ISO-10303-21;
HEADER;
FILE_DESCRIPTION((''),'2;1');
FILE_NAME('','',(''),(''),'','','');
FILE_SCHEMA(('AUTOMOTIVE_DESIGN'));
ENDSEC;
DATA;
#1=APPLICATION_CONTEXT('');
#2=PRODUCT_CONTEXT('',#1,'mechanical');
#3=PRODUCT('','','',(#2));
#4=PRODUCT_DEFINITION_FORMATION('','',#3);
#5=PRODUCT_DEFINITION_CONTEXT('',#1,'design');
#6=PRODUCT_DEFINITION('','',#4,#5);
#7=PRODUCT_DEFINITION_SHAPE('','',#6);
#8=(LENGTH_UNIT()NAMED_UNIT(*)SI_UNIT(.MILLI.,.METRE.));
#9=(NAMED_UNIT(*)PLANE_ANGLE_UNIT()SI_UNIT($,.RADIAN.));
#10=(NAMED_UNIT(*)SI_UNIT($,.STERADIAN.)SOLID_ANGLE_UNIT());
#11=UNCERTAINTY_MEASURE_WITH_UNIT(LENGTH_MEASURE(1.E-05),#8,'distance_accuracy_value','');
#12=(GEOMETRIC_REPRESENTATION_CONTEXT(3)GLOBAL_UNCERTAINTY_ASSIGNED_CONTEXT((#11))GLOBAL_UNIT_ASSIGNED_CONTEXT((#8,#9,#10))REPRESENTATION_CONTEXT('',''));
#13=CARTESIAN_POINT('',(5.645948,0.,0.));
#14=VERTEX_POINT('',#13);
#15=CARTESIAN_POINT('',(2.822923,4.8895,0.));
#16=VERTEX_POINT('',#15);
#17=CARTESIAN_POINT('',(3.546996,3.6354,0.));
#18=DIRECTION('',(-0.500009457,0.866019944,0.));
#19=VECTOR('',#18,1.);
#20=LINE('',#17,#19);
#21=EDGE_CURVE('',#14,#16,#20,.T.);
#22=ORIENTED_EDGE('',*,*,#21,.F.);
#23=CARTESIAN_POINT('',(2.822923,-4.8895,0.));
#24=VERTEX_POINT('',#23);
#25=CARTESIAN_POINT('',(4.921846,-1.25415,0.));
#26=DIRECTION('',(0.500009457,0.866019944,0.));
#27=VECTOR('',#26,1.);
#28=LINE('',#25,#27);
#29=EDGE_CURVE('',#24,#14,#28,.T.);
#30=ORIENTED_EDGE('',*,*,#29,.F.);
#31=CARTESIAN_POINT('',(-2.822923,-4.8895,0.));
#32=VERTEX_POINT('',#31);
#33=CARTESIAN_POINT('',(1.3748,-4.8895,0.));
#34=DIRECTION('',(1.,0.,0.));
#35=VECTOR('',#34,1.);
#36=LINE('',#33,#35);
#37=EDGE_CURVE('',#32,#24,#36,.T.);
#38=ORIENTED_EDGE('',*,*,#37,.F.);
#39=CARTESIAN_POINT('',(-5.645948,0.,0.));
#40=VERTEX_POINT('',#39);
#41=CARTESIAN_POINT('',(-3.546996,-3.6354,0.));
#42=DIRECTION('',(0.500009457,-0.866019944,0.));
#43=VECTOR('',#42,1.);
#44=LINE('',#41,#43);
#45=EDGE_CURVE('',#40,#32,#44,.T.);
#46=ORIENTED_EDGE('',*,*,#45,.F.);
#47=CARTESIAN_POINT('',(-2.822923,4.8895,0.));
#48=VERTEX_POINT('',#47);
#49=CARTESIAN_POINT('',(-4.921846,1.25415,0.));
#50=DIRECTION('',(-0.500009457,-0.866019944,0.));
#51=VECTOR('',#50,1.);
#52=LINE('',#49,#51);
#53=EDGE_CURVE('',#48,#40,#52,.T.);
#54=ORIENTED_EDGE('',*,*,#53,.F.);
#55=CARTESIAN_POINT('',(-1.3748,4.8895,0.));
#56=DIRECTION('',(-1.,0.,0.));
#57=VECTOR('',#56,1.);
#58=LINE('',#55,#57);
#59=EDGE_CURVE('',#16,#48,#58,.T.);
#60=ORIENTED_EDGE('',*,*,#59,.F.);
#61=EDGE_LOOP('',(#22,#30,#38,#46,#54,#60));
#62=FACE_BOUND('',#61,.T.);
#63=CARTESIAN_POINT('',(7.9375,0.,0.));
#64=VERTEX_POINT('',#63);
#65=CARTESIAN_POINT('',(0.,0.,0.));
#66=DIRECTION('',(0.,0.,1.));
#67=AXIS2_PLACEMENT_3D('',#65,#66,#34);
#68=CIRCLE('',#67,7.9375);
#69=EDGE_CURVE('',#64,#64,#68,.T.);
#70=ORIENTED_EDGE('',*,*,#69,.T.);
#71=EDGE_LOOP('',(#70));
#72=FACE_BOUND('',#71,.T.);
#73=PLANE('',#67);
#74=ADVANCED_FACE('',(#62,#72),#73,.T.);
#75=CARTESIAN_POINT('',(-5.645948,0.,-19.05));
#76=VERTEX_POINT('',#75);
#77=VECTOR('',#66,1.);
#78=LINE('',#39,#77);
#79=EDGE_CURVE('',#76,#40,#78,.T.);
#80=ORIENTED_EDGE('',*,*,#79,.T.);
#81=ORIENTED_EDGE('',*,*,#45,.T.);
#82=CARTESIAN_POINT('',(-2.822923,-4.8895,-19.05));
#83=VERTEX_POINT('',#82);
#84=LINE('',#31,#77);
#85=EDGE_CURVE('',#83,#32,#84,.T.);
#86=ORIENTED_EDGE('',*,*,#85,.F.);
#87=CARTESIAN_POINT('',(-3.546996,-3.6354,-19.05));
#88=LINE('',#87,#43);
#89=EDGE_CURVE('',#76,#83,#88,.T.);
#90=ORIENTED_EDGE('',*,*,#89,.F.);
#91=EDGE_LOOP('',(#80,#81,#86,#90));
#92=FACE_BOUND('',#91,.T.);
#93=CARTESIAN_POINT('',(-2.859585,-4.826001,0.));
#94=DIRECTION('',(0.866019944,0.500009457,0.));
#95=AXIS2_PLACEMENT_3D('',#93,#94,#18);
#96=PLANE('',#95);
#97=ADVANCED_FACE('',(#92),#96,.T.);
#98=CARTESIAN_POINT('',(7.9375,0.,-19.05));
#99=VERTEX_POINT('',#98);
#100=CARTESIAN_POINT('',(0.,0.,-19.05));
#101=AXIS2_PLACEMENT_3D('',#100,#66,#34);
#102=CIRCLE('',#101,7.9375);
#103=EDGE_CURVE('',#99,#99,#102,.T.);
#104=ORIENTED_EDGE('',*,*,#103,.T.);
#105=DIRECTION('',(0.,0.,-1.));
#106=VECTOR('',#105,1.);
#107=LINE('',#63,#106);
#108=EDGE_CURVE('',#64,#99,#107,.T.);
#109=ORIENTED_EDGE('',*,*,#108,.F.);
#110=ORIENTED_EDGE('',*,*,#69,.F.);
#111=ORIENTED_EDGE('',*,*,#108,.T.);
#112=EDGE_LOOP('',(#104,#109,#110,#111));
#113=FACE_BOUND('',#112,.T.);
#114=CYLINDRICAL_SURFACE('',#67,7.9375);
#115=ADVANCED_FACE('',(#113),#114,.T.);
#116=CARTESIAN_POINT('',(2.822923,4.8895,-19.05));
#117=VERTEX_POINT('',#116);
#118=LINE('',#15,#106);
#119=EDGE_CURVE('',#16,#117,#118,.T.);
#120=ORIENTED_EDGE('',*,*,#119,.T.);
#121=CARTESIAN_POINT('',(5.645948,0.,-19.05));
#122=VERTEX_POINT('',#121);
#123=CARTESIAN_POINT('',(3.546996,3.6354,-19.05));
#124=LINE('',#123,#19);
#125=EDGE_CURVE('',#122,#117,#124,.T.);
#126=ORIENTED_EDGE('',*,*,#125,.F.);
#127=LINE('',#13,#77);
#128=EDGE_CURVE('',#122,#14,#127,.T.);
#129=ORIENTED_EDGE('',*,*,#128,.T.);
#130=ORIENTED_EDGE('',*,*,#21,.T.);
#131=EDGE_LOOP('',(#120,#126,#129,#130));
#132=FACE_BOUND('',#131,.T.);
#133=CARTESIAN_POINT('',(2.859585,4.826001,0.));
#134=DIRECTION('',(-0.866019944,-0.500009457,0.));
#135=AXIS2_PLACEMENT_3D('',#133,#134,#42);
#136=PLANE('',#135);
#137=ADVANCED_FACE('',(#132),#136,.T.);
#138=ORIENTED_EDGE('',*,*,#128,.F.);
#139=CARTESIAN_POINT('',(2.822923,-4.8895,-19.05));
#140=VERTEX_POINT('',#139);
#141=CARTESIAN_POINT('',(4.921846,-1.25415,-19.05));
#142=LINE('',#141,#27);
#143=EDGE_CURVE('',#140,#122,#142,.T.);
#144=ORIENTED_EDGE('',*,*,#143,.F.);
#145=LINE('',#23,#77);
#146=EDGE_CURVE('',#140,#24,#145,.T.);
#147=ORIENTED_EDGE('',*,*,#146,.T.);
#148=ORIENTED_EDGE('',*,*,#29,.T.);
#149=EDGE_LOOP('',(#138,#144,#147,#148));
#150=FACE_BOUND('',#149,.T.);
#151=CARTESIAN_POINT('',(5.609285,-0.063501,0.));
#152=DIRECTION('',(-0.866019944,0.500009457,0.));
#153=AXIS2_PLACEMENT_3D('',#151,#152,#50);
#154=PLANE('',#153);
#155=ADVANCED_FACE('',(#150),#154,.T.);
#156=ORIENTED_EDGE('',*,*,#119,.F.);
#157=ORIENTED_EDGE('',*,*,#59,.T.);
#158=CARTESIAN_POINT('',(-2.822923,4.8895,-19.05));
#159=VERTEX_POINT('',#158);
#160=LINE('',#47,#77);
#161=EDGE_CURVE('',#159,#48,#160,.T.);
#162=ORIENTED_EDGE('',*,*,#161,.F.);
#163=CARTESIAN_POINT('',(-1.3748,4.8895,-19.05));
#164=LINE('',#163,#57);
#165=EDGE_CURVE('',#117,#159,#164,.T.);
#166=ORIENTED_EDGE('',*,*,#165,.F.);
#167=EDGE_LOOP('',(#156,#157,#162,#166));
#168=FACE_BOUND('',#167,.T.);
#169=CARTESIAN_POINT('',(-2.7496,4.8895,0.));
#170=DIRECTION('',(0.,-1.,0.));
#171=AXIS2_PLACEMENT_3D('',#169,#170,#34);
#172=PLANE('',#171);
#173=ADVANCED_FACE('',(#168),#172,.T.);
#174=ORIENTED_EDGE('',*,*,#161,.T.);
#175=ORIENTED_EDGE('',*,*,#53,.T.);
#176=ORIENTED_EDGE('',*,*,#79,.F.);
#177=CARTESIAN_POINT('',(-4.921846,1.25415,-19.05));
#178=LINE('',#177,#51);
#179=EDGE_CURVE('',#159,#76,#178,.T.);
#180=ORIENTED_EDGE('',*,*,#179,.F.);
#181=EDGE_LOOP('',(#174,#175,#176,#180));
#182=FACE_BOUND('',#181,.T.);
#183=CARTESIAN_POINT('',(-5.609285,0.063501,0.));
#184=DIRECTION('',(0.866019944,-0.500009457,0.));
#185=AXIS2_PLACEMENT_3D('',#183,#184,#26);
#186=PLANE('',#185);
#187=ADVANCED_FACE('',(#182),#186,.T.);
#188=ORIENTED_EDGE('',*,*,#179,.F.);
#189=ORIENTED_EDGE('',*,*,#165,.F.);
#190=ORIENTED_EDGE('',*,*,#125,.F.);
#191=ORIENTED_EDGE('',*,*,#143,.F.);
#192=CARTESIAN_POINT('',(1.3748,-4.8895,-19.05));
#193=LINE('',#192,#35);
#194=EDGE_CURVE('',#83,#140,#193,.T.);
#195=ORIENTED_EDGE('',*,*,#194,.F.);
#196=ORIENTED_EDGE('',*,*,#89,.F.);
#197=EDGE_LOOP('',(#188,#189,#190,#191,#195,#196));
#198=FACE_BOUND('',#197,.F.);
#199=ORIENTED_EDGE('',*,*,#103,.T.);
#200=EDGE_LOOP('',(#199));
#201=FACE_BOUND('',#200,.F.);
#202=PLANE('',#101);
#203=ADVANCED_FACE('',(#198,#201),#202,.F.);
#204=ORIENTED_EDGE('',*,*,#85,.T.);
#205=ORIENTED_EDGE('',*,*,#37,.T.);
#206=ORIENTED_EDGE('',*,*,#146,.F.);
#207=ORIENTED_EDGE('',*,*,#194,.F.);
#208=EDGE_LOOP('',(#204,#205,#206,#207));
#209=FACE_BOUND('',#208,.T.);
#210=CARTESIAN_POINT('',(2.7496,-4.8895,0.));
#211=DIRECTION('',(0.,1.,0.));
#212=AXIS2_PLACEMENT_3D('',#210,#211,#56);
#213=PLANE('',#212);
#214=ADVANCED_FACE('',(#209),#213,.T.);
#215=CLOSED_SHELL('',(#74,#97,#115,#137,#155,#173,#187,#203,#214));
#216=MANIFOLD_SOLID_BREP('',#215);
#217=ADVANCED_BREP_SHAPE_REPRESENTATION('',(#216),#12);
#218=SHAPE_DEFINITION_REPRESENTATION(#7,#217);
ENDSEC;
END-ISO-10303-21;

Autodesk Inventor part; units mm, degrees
ref_plane "YZ Plane" through (0, 0, 0) normal (1, 0, 0) x (0, 1, 0)
ref_plane "XZ Plane" through (0, 0, 0) normal (0, 1, 0) x (-1, 0, 0)
ref_plane "XY Plane" through (0, 0, 0) normal (0, 0, 1) x (1, 0, 0)
sketch "Sketch1" plane through (0, 0, 0) normal (0, 0, 1) x (1, 0, 0)
  line L0 (2.7496, 4.7625) -> (5.4993, 0)
  line L1 (5.4993, 0) -> (2.7496, -4.7625)
  line L2 (2.7496, -4.7625) -> (-2.7496, -4.7625)
  line L3 (-2.7496, -4.7625) -> (-5.4993, 0)
  line L4 (-5.4993, 0) -> (-2.7496, 4.7625)
  line L5 (-2.7496, 4.7625) -> (2.7496, 4.7625)
  circle A0 centre (0, 0) radius 7.9375
  circle A1 centre (0, 0) radius 5.4993 construction
  dimension "d0" = 9.525
  dimension "d2" = 15.875
  dimension "d3" = 2.4382
extrude "Extrusion1" add sketch "Sketch1" against normal blind 19.05
thicken "Thicken Hex" operation add thickness 0.127 both sides no extend neighbours yes toward (-0.8660254, 0.5, 0) faces at (-4.5827, 1.5875, -6.35) (-3.6662, -3.175, -6.35) (0.9165, -4.7625, -6.35) (-0.9165, 4.7625, -6.35) (3.6662, 3.175, -6.35) (4.5827, -1.5875, -6.35)
equation "\"d0\" = hexSize"
equation "\"d2\" = exteriorDiameter"
equation "\"d4\" = length"
equation "\"d6\" = printSpacing"
equation "\"d7\" = printSpacing"
equation "\"hexSize\" = 9.525"
equation "\"exteriorDiameter\" = 15.875"
equation "\"length\" = 19.05"
equation "\"printSpacing\" = 0.127"
properties part number "3_8x5_8x3_4-hexBearing" material "PC/ABS Plastic"
